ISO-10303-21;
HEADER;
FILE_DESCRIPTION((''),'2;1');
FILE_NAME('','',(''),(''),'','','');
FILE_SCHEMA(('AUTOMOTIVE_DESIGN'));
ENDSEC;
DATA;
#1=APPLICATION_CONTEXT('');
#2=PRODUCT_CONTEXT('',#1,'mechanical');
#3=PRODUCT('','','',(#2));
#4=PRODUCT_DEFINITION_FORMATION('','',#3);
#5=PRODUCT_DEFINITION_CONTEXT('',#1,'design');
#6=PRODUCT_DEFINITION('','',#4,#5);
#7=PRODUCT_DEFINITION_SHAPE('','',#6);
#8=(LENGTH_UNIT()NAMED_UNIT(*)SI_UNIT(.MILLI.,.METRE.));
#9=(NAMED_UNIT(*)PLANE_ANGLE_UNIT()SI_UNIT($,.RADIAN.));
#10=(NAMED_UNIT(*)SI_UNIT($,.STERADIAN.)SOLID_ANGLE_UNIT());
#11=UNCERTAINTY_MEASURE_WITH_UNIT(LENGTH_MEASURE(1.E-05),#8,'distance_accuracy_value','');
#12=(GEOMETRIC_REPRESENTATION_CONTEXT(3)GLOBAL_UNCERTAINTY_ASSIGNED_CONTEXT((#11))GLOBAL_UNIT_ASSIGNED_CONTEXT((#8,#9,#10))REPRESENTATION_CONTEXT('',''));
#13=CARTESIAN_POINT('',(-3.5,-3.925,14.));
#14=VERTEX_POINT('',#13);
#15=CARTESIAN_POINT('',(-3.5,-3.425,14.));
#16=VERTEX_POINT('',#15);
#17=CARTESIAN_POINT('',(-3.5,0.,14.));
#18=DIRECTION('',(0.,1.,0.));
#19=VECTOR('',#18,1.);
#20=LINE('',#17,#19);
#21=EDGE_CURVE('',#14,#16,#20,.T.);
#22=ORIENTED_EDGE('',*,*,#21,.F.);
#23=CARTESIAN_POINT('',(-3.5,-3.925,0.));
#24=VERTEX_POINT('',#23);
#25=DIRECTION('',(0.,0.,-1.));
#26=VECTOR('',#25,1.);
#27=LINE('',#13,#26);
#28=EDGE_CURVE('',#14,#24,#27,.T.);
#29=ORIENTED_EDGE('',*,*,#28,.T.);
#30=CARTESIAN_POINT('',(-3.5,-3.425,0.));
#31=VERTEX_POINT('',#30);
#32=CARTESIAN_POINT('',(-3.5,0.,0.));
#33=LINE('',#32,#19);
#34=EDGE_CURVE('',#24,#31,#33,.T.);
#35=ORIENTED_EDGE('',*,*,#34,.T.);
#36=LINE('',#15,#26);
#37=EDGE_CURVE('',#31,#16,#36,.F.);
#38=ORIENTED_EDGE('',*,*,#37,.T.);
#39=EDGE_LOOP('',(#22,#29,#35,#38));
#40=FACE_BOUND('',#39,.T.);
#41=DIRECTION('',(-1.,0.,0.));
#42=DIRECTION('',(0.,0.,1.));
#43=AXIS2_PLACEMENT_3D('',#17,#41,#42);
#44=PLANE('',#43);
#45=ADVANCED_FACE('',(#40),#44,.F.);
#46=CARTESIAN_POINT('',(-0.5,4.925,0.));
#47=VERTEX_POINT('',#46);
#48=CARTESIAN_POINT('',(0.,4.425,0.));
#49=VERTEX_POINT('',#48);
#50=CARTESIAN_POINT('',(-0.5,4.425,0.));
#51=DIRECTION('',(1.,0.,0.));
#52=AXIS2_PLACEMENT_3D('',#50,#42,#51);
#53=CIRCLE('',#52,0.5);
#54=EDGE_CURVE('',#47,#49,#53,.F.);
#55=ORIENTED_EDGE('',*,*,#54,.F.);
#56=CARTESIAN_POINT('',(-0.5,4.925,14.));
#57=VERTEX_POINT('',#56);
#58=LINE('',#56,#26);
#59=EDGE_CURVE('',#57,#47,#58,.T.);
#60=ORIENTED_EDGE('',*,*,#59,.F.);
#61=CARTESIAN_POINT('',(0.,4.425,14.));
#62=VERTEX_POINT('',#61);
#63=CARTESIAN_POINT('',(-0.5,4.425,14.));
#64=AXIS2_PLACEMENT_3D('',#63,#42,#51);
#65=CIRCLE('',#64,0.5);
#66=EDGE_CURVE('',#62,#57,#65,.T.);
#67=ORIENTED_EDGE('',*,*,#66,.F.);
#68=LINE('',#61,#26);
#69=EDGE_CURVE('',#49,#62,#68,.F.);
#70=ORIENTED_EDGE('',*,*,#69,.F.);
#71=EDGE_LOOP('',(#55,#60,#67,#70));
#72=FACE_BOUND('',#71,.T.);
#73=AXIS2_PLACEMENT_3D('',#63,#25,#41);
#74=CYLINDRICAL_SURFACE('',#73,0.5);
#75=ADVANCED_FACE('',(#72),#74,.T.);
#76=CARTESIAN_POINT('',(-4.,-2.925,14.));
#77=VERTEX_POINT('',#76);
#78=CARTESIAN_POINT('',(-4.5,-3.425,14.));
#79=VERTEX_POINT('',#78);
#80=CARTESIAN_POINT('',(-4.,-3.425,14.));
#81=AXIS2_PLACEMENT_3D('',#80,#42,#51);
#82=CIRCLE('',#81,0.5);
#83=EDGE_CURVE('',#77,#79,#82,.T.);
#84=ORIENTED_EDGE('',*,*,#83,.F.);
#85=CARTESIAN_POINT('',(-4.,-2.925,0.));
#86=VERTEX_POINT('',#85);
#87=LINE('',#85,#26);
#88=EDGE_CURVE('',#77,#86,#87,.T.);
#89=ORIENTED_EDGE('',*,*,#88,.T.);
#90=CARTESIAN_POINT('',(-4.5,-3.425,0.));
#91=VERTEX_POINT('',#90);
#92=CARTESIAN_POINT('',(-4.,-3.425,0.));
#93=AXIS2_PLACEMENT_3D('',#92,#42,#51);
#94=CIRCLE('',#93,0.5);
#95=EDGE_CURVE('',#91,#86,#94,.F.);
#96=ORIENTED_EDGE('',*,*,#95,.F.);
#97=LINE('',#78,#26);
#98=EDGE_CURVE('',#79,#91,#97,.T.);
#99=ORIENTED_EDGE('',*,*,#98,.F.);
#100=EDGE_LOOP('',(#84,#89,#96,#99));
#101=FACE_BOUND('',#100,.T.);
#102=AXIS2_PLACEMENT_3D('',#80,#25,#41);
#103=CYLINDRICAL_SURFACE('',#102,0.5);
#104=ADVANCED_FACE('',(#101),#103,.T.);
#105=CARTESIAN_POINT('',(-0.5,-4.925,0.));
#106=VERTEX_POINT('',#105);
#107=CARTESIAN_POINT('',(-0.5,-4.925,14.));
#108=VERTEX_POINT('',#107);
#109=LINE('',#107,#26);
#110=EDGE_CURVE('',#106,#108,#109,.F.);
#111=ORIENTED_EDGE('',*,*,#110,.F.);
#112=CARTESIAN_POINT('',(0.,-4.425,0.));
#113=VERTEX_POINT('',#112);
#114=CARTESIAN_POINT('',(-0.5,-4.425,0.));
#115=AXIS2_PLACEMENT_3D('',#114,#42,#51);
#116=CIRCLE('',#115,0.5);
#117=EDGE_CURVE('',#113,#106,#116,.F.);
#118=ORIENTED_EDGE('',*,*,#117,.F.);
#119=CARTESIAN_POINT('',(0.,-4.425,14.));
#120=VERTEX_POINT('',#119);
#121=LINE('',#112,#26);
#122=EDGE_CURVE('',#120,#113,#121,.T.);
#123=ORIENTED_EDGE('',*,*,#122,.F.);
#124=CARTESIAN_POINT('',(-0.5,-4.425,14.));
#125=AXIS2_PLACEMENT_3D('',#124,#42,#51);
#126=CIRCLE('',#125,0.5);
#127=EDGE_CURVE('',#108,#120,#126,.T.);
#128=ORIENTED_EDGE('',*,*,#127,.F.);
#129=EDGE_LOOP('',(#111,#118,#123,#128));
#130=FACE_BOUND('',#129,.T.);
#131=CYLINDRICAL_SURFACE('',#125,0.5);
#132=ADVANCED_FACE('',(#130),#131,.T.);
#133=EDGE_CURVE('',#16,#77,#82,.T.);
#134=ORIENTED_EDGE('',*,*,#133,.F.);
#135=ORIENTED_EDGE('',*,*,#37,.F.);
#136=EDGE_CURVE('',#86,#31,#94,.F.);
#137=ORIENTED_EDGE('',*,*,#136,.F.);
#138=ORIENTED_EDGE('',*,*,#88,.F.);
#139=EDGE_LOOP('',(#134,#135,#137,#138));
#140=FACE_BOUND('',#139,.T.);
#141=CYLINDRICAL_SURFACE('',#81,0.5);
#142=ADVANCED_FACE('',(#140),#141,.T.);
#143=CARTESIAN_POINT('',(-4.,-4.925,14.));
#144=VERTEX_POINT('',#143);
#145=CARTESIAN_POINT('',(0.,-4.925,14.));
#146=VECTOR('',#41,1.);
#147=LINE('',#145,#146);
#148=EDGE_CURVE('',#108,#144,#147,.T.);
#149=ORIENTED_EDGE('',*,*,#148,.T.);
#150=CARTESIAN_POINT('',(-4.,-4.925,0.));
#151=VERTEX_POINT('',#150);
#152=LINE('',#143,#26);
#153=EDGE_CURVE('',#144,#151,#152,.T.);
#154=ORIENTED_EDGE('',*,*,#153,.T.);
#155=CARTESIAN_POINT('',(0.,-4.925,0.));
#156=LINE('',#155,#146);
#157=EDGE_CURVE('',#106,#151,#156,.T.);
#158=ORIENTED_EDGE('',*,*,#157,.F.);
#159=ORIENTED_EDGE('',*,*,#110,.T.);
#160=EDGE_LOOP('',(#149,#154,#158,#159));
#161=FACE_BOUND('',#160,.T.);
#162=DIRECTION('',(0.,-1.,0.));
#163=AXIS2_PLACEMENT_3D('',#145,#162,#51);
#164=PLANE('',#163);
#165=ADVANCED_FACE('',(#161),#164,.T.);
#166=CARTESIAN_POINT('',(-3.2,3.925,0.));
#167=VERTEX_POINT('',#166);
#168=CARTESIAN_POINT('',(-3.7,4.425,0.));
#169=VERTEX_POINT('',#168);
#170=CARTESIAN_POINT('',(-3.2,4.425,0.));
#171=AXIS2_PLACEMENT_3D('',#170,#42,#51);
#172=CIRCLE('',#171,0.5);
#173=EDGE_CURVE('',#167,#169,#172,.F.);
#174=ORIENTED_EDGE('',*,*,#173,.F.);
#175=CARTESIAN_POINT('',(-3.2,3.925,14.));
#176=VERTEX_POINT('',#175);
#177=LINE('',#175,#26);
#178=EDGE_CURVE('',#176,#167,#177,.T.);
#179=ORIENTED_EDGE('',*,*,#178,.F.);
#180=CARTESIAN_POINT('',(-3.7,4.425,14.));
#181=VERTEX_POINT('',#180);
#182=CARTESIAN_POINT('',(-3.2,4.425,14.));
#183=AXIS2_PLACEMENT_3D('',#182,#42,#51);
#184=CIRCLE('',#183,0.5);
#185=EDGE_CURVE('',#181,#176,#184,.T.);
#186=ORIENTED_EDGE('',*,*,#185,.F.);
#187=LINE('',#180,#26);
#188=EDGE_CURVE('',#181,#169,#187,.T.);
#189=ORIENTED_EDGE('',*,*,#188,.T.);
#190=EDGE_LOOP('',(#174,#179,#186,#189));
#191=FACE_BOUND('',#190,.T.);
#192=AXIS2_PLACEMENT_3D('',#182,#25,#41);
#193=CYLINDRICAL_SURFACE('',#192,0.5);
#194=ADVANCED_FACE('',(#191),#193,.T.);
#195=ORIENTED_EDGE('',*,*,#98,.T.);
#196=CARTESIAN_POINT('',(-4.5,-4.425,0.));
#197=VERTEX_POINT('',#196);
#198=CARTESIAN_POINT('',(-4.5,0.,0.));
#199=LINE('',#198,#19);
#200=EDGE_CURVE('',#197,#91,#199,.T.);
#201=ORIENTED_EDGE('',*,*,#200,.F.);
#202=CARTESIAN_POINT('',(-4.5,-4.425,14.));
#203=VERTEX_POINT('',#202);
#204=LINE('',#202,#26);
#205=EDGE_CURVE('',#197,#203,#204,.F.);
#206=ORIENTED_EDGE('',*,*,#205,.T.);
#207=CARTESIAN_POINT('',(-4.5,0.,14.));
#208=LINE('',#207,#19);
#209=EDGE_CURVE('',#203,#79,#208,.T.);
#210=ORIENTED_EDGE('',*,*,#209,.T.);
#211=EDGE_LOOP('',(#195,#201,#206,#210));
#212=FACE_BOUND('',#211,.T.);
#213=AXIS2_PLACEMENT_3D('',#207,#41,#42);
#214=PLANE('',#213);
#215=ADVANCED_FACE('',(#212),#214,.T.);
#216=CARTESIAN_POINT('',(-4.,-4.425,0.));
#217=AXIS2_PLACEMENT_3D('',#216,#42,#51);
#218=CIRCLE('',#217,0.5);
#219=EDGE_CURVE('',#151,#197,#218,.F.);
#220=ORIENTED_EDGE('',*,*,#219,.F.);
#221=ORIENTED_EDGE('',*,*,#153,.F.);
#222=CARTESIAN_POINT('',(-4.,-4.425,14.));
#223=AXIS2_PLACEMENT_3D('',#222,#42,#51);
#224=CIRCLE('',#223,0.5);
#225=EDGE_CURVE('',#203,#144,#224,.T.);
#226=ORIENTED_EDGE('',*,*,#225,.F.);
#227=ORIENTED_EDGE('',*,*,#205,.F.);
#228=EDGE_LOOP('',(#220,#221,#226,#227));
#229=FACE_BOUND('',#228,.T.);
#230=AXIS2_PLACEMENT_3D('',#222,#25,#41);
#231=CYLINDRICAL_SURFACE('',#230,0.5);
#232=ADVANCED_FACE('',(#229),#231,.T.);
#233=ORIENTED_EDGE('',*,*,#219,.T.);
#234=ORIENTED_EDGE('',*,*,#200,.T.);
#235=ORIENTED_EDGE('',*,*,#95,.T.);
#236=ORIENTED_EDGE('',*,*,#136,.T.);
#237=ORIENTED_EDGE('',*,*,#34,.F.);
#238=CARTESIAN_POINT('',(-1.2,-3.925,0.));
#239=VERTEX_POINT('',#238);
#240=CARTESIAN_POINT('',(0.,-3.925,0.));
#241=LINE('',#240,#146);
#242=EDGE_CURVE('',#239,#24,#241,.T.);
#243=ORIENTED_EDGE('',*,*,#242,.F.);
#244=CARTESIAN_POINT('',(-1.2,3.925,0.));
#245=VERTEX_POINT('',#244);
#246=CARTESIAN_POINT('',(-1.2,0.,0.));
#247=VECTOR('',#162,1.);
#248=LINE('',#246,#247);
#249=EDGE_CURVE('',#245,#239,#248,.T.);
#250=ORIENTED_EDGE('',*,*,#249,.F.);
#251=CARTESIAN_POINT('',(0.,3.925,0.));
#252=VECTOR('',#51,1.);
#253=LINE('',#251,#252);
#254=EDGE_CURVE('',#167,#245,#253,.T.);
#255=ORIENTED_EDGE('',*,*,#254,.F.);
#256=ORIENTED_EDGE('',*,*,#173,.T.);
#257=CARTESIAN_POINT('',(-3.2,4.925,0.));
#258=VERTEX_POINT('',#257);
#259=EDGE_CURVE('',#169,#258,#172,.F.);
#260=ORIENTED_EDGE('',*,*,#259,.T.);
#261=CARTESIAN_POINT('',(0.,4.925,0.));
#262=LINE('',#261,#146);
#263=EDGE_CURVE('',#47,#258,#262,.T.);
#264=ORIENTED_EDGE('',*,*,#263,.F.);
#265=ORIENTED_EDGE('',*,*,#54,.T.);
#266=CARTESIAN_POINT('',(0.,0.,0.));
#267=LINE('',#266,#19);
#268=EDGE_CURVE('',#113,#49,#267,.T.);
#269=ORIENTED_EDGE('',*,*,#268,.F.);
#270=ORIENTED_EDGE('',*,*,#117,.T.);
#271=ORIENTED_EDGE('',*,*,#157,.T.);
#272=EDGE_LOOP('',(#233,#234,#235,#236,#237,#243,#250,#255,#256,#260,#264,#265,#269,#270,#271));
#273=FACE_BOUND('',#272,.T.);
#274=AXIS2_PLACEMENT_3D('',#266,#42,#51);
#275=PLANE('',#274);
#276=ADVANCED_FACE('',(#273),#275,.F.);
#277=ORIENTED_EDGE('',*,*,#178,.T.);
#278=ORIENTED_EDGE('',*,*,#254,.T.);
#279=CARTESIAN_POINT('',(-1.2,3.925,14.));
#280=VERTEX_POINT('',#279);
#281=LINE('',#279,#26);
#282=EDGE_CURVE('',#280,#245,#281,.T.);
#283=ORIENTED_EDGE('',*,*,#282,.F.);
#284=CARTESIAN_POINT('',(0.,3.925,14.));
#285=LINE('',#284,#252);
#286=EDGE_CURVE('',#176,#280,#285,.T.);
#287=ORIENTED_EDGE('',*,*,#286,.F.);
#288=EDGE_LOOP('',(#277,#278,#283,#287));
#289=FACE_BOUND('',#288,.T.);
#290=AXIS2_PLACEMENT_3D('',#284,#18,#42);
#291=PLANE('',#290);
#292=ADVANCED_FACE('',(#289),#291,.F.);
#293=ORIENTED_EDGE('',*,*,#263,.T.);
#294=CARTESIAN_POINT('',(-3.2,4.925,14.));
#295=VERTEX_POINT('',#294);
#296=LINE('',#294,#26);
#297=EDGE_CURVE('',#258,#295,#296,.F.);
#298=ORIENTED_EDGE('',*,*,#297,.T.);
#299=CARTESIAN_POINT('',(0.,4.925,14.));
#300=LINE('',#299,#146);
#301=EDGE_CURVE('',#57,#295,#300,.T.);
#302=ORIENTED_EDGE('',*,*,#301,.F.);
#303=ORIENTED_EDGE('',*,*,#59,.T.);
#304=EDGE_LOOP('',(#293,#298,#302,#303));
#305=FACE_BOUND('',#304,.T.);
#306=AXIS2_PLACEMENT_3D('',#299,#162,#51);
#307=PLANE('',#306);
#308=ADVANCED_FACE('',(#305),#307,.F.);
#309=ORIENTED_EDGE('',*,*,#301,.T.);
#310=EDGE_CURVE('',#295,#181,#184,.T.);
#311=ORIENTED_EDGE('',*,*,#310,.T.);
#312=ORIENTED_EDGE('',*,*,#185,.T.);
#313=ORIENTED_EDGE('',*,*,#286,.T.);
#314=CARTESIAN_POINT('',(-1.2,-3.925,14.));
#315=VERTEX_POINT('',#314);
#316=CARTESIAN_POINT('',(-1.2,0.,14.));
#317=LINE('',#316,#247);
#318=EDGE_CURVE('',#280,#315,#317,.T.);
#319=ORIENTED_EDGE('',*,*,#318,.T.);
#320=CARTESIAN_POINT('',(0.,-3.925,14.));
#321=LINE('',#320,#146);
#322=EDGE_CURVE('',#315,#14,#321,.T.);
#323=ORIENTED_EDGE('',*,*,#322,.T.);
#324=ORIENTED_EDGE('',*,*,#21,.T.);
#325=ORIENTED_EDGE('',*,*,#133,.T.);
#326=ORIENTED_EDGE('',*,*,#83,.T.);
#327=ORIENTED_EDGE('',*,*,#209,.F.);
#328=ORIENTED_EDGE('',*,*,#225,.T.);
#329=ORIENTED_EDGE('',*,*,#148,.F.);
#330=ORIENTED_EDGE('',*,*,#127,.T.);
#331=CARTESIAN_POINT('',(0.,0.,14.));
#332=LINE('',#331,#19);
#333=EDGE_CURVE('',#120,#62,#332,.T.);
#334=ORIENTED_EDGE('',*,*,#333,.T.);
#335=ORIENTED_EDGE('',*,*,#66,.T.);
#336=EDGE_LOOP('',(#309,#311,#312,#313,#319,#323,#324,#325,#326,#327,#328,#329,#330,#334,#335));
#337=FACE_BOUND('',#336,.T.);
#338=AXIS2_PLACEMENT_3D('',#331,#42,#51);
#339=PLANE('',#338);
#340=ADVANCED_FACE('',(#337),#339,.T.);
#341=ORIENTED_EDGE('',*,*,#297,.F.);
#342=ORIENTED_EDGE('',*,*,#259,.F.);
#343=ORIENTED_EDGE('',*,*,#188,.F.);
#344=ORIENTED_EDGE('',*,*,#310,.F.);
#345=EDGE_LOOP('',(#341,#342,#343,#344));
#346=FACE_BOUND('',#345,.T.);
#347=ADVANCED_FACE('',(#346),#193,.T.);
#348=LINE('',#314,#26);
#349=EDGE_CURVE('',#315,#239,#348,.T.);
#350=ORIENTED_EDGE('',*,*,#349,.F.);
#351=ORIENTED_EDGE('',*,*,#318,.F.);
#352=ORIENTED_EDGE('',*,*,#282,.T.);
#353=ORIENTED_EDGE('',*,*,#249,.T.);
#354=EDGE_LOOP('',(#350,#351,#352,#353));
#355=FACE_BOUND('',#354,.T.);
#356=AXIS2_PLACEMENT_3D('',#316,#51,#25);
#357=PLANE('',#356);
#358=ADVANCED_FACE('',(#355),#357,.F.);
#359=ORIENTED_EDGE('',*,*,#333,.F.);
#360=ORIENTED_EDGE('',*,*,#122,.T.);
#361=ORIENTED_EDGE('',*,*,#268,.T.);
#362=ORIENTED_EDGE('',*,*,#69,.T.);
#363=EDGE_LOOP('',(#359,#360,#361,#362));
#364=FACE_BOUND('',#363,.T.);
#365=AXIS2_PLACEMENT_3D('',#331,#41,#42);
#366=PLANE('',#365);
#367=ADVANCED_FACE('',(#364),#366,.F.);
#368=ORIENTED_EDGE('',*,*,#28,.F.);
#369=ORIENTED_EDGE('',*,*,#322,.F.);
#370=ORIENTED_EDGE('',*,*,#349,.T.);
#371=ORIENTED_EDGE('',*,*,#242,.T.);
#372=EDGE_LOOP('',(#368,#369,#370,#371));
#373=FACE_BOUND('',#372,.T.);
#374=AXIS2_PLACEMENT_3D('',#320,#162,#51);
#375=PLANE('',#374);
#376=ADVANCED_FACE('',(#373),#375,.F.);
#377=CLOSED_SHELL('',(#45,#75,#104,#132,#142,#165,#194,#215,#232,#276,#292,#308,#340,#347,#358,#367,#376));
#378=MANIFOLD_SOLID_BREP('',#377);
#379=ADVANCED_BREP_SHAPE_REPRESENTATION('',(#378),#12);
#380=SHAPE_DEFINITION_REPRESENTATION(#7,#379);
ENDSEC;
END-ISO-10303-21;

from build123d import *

# Parameters (mm, degrees)
SKETCH1_W           = 1
SKETCH1_H           = 1
BOSS_EXTRUDE1_DEPTH = 14
FILLET1_R           = 0.5


with BuildPart() as part:
    # Sketch1 → Boss-Extrude1 (new body)
    with BuildSketch(Plane.XY):
        Polygon((0, 4.925), (-3.7, 4.925), (-3.7, 3.925), (-1.2, 3.925), (-1.2, 0), (0, 0), align=None)
        Polygon((0, -4.925), (0, 0), (-1.2, 0), (-1.2, -3.925), (-3.5, -3.925), (-4.5, -3.925), (-4.5, -4.925), align=None)
        with Locations((-4, -3.425)):
            Rectangle(SKETCH1_W, SKETCH1_H)
    extrude(amount=BOSS_EXTRUDE1_DEPTH)

    # Fillet1
    fillet1_edges = [part.edges().sort_by_distance(p)[0] for p in [
        (0, -4.925, 7),
        (-4.5, -4.925, 7),
        (-4.5, -2.925, 7),
        (-3.5, -2.925, 7),
        (-3.7, 3.925, 7),
        (-3.7, 4.925, 7),
        (0, 4.925, 7),
    ]]
    fillet(fillet1_edges, radius=FILLET1_R - 0.0001)  # a hair under: the kernel refuses the full size


solid = part.part
